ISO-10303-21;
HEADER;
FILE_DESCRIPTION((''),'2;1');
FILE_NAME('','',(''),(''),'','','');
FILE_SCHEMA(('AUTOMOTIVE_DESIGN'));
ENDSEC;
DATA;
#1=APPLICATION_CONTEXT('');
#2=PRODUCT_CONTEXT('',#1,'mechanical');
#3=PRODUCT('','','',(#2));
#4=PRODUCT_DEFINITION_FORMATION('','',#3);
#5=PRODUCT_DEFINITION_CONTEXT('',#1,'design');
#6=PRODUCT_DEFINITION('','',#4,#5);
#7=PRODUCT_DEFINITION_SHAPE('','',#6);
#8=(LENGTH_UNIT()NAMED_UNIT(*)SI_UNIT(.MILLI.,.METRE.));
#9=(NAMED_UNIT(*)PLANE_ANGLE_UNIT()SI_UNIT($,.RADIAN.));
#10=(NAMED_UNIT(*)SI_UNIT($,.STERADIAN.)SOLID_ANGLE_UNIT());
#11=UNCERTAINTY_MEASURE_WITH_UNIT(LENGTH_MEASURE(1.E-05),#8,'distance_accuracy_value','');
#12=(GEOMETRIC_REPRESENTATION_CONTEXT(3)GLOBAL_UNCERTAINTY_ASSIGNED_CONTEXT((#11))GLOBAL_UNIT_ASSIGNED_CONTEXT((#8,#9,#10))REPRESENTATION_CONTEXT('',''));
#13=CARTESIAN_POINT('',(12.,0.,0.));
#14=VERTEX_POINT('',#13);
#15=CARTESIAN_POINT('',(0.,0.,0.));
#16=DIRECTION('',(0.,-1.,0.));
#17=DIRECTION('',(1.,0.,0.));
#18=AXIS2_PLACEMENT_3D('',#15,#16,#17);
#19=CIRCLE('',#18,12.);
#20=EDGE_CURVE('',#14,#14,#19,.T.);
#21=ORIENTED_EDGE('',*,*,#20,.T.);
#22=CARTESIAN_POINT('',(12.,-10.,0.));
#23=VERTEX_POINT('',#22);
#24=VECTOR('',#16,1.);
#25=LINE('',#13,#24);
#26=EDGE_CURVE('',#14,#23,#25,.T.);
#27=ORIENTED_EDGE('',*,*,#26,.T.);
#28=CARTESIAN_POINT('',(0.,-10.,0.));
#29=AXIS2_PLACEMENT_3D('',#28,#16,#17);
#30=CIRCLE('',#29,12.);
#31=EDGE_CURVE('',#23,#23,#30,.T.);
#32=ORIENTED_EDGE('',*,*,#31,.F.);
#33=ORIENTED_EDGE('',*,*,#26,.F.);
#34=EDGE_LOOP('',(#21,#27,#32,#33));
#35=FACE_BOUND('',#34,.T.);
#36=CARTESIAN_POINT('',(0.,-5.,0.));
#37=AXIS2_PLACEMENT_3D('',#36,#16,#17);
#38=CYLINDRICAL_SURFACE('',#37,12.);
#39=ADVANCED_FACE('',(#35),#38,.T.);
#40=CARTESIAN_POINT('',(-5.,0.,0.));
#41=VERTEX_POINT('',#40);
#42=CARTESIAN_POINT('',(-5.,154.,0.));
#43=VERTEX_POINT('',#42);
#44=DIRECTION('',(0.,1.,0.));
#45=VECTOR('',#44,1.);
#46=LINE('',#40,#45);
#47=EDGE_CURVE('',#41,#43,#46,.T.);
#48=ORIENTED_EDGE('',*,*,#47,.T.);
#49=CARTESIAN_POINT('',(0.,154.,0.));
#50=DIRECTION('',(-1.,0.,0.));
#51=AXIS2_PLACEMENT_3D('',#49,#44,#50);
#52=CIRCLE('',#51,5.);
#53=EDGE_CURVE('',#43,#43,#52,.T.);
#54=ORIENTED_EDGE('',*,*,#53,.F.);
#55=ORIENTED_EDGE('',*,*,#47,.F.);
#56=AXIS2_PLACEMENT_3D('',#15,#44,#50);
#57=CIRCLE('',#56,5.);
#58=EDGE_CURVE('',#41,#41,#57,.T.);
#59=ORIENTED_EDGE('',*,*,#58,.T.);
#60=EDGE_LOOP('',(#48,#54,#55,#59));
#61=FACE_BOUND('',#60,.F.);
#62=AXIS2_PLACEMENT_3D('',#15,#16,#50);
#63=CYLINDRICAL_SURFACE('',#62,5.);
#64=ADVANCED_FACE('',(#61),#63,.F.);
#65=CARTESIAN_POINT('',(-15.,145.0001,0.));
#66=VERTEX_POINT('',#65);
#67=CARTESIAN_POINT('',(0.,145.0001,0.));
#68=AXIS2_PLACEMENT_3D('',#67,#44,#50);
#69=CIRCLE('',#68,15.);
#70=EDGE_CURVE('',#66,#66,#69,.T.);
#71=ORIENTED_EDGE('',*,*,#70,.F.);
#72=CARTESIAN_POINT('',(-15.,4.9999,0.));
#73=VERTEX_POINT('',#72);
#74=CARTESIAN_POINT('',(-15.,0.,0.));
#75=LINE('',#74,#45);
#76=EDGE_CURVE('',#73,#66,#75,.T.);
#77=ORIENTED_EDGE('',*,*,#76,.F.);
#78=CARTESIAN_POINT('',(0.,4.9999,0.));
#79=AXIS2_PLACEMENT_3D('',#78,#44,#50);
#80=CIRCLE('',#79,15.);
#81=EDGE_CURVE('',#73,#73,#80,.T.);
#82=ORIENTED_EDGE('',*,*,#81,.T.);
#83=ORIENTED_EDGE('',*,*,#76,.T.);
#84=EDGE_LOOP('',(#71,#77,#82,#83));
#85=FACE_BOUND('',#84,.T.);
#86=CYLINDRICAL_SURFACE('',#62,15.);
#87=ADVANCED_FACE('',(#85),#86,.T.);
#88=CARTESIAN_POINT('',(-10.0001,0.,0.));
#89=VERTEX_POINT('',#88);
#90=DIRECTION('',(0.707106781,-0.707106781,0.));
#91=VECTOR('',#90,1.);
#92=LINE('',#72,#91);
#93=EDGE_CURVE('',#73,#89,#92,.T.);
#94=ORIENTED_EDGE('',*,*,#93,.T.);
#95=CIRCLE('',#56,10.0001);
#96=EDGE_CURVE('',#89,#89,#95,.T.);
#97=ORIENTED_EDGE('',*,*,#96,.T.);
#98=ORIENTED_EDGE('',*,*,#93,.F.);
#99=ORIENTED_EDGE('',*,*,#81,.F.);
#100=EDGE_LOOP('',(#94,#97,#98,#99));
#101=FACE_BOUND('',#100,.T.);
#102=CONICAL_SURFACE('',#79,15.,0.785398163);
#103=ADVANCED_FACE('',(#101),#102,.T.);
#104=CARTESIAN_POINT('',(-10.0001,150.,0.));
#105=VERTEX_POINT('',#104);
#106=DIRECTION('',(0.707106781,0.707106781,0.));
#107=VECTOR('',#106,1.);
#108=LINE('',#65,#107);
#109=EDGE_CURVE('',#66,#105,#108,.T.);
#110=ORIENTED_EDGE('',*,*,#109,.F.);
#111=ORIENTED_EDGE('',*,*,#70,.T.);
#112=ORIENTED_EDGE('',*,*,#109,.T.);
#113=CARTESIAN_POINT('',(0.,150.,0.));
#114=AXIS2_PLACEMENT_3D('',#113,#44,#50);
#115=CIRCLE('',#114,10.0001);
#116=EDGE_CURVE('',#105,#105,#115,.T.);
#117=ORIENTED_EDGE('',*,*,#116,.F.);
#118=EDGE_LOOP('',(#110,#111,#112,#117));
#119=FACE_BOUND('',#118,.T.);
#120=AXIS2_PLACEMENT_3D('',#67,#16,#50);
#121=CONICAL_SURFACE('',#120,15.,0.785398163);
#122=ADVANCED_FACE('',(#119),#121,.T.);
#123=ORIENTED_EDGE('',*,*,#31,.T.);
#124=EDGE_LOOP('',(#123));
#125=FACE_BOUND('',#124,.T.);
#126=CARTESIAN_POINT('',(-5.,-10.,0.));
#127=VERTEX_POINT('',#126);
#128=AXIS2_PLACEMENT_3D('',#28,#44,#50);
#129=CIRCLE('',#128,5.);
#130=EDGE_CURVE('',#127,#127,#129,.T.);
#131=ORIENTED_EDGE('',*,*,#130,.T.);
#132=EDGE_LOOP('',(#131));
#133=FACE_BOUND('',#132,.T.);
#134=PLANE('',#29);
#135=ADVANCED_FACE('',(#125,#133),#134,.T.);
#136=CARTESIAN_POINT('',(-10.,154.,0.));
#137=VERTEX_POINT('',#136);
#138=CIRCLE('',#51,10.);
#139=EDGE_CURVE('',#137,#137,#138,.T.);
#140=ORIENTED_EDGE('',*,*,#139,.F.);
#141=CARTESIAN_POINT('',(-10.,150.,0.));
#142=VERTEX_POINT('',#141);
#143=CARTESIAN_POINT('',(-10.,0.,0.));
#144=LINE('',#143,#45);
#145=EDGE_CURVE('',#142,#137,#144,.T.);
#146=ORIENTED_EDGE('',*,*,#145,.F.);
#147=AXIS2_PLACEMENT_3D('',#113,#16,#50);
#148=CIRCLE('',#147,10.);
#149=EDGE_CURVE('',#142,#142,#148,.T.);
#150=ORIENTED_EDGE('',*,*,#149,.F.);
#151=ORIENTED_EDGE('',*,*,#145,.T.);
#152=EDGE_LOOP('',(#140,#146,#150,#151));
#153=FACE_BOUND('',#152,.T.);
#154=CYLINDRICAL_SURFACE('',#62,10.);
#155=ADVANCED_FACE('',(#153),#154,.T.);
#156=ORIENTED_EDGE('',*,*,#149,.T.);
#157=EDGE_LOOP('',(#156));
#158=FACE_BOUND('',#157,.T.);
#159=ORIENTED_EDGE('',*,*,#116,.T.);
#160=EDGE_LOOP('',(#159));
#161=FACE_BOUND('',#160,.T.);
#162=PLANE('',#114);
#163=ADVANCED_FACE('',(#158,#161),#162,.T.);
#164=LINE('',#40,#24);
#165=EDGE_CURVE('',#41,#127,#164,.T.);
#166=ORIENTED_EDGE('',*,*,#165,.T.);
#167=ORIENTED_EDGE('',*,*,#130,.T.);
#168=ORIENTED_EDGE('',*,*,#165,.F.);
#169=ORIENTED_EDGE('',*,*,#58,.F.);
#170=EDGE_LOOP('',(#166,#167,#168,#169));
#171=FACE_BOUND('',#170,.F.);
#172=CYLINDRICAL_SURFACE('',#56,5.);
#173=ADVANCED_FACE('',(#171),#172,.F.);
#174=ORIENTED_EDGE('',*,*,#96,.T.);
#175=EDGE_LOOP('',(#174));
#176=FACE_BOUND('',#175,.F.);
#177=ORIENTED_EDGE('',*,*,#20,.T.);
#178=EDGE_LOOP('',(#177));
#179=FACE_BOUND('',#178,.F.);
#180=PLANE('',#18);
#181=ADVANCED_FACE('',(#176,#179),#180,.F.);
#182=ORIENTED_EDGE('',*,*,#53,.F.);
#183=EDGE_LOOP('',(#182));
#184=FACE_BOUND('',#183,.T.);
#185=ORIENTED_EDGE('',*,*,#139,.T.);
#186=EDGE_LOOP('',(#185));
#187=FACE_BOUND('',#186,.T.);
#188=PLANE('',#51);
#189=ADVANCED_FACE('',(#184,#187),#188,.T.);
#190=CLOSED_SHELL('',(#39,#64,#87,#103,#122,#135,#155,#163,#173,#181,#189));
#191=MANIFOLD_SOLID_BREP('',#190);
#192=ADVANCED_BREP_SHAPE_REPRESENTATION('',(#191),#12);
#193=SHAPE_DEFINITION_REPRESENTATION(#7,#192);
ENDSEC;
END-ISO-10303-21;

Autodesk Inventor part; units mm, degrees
ref_plane "YZ Plane" through (0, 0, 0) normal (1, 0, 0) x (0, 1, 0)
ref_plane "XZ Plane" through (0, 0, 0) normal (0, 1, 0) x (-1, 0, 0)
ref_plane "XY Plane" through (0, 0, 0) normal (0, 0, 1) x (1, 0, 0)
sketch "Esquisse1" plane through (0, 0, 0) normal (0, 1, 0) x (-1, 0, 0)
  circle A0 centre (0, 0) radius 15
  dimension "d0" = 30
extrude "Extrusion1" add sketch "Esquisse1" along normal blind 150
sketch "Esquisse2" plane through (0, 0, 0) normal (0, 1, 0) x (-1, 0, 0)
  circle A0 centre (0, 0) radius 10
  dimension "d5" = 20
extrude "Extrusion2" add sketch "Esquisse2" along normal blind 154 and the other way blind 5
thread "Filetage2" size "M17x1.5" class "6g" standard "ANSI Metric M Profile" length 4
chamfer "Chanfrein1" distance 5 angle 45 1 edges at (15, 150, 0)
chamfer "Chanfrein2" distance 5 angle 45 1 edges at (15, 0, 0)
sketch "Esquisse5" plane through (0, -5, 0) normal (0, -1, 0) x (1, 0, 0)
  circle A0 centre (0, 0) radius 12
  dimension "d24" = 24
extrude "Extrusion4" add sketch "Esquisse5" along normal blind 5 and the other way blind 5
sketch "Esquisse3" plane through (0, 0, 0) normal (0, 1, 0) x (-1, 0, 0)
  circle A0 centre (0, 0) radius 10 projected
  circle A1 centre (0, 0) radius 5
  dimension "d33" = 10
extrude "Extrusion3" cut sketch "Esquisse3" along normal blind 154 and the other way blind 72 contours A1
thread "Filetage5" size "M24x3" class "6g" standard "ANSI Metric M Profile" length 5 offset 5
properties part number "Manche interm"
